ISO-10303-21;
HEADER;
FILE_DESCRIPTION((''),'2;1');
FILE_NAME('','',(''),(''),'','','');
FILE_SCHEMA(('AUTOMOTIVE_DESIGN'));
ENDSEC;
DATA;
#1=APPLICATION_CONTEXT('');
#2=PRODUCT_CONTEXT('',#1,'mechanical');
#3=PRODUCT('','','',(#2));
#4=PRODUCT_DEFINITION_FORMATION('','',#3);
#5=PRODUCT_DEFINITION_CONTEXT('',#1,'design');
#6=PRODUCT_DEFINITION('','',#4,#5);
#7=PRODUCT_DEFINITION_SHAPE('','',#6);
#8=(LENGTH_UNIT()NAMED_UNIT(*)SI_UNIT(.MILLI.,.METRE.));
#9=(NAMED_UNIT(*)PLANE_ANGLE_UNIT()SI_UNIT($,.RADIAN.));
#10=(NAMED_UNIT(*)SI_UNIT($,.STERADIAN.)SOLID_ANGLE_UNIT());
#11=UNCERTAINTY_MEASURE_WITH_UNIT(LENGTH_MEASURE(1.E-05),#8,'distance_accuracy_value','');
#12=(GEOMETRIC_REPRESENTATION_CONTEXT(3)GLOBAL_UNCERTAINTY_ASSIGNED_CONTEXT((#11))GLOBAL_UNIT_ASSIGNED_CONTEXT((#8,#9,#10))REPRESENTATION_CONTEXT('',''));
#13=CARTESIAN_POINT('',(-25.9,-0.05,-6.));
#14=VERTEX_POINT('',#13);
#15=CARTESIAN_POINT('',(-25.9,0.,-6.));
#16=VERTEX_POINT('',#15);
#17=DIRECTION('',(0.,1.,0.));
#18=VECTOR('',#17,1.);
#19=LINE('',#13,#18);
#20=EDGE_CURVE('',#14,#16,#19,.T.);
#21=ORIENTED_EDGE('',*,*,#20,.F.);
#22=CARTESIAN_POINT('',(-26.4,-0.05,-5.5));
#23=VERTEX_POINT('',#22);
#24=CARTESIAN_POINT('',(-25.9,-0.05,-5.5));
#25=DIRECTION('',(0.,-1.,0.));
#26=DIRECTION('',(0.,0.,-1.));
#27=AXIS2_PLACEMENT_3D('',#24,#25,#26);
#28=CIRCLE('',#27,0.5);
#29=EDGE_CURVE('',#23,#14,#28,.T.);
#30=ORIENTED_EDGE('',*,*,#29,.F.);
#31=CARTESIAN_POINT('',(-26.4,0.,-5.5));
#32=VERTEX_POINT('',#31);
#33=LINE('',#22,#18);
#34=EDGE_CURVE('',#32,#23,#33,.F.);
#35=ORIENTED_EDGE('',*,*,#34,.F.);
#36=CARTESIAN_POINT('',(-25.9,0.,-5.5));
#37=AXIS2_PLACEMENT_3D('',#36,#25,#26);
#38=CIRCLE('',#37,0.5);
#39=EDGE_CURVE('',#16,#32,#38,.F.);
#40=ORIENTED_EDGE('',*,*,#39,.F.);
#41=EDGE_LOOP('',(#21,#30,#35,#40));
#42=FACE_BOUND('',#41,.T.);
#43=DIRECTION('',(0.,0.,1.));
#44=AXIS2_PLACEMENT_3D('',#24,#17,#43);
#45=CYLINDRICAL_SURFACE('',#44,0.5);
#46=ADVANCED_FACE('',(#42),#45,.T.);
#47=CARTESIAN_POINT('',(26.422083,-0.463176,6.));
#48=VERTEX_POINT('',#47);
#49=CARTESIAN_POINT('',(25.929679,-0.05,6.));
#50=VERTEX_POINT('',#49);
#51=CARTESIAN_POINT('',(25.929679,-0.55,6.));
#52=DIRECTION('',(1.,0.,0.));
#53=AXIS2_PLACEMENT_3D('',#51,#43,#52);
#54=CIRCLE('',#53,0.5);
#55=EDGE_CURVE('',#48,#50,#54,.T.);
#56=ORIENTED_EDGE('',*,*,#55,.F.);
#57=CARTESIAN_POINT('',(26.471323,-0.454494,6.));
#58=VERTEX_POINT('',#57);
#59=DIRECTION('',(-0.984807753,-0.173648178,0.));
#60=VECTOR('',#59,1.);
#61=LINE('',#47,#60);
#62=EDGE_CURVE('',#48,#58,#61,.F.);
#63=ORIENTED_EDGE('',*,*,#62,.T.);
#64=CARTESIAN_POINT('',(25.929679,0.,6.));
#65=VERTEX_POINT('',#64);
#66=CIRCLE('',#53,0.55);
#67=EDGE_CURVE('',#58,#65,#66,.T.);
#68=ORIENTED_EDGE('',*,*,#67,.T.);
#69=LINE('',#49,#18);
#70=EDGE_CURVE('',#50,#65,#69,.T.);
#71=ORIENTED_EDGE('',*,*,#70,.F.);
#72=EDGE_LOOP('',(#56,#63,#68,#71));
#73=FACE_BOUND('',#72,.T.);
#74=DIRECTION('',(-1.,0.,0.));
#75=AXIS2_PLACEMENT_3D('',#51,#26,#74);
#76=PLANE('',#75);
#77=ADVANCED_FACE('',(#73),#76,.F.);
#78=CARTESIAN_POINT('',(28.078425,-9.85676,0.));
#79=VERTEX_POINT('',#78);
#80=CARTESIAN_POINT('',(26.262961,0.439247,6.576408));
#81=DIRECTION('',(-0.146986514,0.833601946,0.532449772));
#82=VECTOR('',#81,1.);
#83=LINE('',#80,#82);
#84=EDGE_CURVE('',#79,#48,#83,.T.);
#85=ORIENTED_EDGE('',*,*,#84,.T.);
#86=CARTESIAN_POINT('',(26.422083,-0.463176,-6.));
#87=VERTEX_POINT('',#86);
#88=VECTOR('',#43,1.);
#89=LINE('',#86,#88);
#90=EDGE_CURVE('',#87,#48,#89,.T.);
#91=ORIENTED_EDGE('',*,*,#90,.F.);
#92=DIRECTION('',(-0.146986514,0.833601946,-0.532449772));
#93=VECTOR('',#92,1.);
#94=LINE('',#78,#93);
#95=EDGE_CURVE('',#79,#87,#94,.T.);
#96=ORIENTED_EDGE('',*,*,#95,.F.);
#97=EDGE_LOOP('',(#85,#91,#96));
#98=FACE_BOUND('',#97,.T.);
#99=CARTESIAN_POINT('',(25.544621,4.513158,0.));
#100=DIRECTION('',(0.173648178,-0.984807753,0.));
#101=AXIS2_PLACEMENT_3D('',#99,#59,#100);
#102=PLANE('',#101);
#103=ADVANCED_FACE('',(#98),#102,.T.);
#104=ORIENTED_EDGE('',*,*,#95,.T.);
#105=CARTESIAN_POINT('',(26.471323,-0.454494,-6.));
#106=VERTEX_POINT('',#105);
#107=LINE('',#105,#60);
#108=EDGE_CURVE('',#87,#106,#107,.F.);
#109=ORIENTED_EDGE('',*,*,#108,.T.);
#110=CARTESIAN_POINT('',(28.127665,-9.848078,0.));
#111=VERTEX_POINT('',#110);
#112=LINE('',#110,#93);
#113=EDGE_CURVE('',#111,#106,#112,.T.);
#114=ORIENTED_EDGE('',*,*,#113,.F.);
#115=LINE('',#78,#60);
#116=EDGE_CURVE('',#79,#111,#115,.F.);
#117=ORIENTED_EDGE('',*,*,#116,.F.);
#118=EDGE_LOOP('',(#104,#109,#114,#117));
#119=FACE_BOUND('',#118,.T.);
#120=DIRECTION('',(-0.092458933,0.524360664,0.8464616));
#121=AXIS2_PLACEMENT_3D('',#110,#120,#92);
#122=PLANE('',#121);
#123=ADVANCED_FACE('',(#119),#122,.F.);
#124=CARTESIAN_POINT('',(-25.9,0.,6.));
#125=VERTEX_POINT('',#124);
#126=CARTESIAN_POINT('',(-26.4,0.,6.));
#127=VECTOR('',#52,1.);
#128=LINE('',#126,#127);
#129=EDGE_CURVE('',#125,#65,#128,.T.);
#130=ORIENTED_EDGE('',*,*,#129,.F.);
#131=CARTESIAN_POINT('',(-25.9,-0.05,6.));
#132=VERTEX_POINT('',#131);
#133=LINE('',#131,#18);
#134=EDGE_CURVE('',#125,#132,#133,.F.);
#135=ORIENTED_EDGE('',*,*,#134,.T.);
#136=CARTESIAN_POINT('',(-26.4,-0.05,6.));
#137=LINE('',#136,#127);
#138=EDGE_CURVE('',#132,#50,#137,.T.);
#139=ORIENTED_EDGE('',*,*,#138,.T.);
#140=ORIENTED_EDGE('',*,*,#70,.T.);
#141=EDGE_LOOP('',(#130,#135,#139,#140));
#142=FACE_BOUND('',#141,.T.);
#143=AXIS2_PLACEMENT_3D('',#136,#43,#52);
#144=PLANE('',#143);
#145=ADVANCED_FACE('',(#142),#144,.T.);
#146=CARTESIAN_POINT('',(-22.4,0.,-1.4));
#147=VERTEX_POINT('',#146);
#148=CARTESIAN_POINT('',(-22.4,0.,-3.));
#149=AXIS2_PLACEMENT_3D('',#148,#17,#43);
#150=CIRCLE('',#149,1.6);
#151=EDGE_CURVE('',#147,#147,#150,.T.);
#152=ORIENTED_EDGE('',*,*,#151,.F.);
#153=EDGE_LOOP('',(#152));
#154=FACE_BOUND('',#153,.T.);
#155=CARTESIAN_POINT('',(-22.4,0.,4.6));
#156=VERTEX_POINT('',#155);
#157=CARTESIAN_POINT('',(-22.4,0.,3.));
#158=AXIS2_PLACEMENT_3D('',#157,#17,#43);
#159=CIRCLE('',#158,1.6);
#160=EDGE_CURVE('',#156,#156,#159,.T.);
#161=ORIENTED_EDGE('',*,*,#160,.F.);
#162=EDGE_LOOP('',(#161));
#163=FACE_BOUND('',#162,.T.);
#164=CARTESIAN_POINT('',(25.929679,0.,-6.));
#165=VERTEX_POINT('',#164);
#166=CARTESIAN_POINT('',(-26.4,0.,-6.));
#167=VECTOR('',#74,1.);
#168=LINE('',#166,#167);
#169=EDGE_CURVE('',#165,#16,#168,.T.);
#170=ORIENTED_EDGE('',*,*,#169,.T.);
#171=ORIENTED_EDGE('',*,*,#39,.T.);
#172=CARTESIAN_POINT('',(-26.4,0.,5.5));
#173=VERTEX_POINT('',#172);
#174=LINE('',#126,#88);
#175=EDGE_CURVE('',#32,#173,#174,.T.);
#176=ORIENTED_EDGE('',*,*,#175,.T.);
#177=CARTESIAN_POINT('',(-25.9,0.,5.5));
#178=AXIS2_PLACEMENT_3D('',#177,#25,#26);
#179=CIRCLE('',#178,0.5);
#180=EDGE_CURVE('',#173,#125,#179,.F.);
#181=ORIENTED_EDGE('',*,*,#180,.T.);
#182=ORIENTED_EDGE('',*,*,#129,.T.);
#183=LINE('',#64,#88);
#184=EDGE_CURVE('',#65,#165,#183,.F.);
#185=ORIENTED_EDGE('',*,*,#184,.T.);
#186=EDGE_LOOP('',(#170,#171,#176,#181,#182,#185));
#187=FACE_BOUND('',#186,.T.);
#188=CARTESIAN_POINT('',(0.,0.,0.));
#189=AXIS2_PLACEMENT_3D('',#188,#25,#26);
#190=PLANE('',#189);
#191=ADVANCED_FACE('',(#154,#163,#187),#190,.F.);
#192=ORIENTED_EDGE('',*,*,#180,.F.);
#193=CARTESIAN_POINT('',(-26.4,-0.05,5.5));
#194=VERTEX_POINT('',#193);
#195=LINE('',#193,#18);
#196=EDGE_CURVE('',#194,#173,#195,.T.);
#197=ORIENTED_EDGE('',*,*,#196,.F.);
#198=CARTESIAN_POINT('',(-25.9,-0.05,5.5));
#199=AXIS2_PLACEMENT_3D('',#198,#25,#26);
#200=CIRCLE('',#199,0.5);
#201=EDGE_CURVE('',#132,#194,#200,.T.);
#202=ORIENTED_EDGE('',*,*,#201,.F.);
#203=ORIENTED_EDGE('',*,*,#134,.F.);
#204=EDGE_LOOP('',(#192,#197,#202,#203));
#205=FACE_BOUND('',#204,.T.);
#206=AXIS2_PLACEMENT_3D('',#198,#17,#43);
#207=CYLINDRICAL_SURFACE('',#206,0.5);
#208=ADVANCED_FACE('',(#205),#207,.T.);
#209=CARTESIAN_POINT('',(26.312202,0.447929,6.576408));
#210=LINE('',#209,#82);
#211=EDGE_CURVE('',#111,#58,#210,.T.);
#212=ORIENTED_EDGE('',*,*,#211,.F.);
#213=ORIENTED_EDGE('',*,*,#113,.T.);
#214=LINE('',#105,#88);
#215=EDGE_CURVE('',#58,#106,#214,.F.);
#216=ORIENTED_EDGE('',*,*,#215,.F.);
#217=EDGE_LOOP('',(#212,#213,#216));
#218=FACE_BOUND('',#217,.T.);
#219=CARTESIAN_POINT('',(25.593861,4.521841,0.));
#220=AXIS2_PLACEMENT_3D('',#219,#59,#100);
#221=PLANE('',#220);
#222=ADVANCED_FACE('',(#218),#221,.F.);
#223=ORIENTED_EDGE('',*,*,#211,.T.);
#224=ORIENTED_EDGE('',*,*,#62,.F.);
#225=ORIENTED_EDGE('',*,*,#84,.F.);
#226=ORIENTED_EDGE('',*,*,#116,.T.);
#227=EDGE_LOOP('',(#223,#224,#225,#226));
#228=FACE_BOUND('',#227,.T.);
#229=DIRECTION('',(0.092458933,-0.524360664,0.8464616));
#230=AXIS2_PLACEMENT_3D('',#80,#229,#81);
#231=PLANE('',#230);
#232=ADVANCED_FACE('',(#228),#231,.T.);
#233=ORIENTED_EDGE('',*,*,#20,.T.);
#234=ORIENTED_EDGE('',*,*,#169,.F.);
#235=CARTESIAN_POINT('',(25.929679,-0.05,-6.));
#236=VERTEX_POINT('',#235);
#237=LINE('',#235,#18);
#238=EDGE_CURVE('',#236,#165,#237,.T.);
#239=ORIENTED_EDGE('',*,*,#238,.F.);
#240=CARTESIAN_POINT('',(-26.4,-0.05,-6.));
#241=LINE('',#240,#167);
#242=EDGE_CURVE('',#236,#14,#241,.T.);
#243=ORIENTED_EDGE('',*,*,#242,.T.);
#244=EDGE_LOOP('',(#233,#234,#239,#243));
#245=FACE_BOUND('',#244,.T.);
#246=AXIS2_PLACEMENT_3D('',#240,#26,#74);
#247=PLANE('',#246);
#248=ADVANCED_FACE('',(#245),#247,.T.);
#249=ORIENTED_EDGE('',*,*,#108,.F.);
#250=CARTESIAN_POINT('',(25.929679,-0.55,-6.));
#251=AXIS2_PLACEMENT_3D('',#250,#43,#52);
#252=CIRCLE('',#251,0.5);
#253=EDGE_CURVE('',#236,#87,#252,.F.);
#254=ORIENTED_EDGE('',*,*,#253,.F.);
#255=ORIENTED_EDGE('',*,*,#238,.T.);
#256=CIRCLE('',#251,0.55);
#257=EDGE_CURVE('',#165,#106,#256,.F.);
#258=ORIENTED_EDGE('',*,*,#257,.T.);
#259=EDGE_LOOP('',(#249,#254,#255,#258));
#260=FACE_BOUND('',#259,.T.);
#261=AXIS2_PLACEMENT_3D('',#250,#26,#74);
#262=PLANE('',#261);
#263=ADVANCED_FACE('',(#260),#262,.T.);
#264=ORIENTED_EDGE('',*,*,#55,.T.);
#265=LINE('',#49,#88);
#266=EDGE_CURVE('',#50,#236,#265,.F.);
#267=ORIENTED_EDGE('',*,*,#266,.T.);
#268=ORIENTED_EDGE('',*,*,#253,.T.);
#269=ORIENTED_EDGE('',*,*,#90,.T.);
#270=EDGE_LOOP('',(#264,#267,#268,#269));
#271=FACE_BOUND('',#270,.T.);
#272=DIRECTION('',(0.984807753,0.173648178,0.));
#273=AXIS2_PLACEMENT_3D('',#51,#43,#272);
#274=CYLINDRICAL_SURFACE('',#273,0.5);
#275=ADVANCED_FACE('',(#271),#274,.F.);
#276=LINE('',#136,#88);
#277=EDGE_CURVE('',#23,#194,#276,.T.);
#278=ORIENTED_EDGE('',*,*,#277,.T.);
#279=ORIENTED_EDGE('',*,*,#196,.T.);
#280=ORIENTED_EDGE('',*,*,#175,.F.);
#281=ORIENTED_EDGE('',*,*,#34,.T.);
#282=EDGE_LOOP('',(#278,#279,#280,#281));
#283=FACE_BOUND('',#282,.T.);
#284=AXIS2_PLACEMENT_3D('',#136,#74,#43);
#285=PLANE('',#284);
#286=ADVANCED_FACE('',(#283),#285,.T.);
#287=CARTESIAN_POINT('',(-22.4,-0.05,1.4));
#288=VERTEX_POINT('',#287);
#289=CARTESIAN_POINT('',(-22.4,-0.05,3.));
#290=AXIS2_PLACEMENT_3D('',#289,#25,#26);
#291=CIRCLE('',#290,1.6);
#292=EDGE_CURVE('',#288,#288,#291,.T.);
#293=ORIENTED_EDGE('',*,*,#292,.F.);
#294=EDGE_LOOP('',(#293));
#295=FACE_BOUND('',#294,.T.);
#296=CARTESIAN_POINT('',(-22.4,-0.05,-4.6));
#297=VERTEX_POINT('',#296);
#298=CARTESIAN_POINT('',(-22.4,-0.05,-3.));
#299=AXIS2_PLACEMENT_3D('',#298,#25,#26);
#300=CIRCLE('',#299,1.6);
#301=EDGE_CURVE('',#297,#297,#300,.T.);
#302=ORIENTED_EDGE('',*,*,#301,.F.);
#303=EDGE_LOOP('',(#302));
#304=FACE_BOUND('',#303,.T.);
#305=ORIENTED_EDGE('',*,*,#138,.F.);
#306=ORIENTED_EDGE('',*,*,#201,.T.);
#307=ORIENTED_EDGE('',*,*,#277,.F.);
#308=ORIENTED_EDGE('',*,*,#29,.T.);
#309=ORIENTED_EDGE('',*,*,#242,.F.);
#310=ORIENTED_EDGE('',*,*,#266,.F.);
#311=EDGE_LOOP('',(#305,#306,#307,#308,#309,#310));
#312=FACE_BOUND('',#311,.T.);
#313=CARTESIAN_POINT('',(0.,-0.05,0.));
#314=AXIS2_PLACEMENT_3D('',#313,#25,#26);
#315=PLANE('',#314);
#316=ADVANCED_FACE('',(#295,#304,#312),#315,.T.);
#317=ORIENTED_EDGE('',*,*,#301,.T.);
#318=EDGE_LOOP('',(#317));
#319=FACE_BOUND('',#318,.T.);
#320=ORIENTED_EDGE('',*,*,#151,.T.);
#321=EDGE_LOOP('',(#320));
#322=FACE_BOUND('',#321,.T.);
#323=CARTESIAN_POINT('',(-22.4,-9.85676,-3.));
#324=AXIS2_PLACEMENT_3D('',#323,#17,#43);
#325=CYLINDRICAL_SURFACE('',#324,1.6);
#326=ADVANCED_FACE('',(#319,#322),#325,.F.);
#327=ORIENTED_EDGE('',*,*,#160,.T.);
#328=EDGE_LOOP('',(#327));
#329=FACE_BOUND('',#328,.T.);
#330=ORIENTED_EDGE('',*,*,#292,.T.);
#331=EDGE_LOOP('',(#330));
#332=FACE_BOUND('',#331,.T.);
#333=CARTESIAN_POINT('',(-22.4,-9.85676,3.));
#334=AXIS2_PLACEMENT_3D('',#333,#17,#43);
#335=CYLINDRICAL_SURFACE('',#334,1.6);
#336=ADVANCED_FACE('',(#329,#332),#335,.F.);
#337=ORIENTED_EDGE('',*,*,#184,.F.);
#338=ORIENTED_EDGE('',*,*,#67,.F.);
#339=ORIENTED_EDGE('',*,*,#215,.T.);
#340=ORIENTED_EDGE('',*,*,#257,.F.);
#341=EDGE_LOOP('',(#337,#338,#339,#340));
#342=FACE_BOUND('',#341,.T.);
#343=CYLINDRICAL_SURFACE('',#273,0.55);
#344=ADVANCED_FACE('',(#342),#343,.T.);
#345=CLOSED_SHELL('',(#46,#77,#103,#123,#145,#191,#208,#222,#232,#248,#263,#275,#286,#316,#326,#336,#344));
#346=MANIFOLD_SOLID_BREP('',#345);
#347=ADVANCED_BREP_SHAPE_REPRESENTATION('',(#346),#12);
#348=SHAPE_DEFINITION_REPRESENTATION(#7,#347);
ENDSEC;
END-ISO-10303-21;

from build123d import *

# Parameters (mm, degrees)
SKETCH2_W            = 52.8
SKETCH2_H            = 12
BASE_FLANGE1_DEPTH   = 0.05
EDGE_FLANGE1_START   = -6
EDGE_FLANGE1_DEPTH   = 12
EDGE_FLANGE1_2_DEPTH = 12
CUT_EXTRUDE2_DEPTH   = 0.05
SKETCH10_R           = 1.6
CUT_EXTRUDE1_DEPTH   = 31.402652498
FILLET1_R            = 0.5


# Read off the part's stored shape, not the designer's step: Edge-Flange1
# Sheet-metal steps are written as plain solids
with BuildPart() as part:
    # Sketch2 → Base-Flange1 (new body)
    with BuildSketch(Plane(origin=(0, 0, 0), x_dir=(1, 0, 0), z_dir=(0, 1, 0))):
        Rectangle(SKETCH2_W, SKETCH2_H)
    extrude(amount=-BASE_FLANGE1_DEPTH)

    # Edge-Flange1 outline → Edge-Flange1 (cut)
    with BuildSketch(Plane.XY.offset(EDGE_FLANGE1_START)):
        with BuildLine():
            ThreePointArc((25.929678854, 0), (26.046939248, -0.012645368), (26.158807639, -0.05))
            Line((26.158807639, -0.05), (26.4, -0.05))
            Line((26.4, -0.05), (26.4, 0))
            Line((26.4, 0), (25.929678854, 0))
        make_face()
    extrude(amount=EDGE_FLANGE1_DEPTH, mode=Mode.SUBTRACT)

    # Edge-Flange1 2 outline → Edge-Flange1 2 (add)
    with BuildSketch(Plane.XY.offset(EDGE_FLANGE1_START)):
        with BuildLine():
            Line((28.127665428, -9.84807753), (26.471323118, -0.454493502))
            ThreePointArc((26.471323118, -0.454493502), (26.364910426, -0.213735999), (26.158807639, -0.05))
            Line((26.158807639, -0.05), (25.929678854, -0.05))
            ThreePointArc((25.929678854, -0.05), (26.251072659, -0.166977778), (26.42208273, -0.463175911))
            Line((26.42208273, -0.463175911), (28.07842504, -9.856759939))
            Line((28.07842504, -9.856759939), (28.127665428, -9.84807753))
        make_face()
    extrude(amount=EDGE_FLANGE1_2_DEPTH)

    # Sketch11 → Cut-Extrude2 (cut)
    with BuildSketch(Plane(origin=(25.595392091, 4.513158207, 0), x_dir=(0, 0, -1), z_dir=(0.9848077530122074, 0.17364817766693416, 0))):
        Polygon((29.405769939, -61.330580197), (0, -14.582780947), (-6, -5.044285745), (-6, -14.582780947), (-6, -69.810093397), (19.725851686, -177.227060012), (55.131621625, -168.747546812), align=None)
    cut_extrude2 = extrude(amount=-CUT_EXTRUDE2_DEPTH, mode=Mode.SUBTRACT)

    # Mirror1: Cut-Extrude2 across plane
    add(cut_extrude2.mirror(Plane.XY), mode=Mode.SUBTRACT)

    # Sketch10 → Cut-Extrude1 (cut, through all)
    with BuildSketch(Plane(origin=(0, 0, 0), x_dir=(1, 0, 0), z_dir=(0, 1, 0))):
        with Locations(Location((-22.4, 3, 0), (0, 0, 270))):
            Circle(SKETCH10_R)
        with Locations(Location((-22.4, -3, 0), (0, 0, 270))):
            Circle(SKETCH10_R)
    extrude(amount=-CUT_EXTRUDE1_DEPTH, mode=Mode.SUBTRACT)

    # Fillet1
    fillet1_edges = [part.edges().sort_by_distance(p)[0] for p in [
        (-26.4, -0.025, 6),
        (-26.4, -0.025, -6),
    ]]
    fillet(fillet1_edges, radius=FILLET1_R)


solid = part.part
